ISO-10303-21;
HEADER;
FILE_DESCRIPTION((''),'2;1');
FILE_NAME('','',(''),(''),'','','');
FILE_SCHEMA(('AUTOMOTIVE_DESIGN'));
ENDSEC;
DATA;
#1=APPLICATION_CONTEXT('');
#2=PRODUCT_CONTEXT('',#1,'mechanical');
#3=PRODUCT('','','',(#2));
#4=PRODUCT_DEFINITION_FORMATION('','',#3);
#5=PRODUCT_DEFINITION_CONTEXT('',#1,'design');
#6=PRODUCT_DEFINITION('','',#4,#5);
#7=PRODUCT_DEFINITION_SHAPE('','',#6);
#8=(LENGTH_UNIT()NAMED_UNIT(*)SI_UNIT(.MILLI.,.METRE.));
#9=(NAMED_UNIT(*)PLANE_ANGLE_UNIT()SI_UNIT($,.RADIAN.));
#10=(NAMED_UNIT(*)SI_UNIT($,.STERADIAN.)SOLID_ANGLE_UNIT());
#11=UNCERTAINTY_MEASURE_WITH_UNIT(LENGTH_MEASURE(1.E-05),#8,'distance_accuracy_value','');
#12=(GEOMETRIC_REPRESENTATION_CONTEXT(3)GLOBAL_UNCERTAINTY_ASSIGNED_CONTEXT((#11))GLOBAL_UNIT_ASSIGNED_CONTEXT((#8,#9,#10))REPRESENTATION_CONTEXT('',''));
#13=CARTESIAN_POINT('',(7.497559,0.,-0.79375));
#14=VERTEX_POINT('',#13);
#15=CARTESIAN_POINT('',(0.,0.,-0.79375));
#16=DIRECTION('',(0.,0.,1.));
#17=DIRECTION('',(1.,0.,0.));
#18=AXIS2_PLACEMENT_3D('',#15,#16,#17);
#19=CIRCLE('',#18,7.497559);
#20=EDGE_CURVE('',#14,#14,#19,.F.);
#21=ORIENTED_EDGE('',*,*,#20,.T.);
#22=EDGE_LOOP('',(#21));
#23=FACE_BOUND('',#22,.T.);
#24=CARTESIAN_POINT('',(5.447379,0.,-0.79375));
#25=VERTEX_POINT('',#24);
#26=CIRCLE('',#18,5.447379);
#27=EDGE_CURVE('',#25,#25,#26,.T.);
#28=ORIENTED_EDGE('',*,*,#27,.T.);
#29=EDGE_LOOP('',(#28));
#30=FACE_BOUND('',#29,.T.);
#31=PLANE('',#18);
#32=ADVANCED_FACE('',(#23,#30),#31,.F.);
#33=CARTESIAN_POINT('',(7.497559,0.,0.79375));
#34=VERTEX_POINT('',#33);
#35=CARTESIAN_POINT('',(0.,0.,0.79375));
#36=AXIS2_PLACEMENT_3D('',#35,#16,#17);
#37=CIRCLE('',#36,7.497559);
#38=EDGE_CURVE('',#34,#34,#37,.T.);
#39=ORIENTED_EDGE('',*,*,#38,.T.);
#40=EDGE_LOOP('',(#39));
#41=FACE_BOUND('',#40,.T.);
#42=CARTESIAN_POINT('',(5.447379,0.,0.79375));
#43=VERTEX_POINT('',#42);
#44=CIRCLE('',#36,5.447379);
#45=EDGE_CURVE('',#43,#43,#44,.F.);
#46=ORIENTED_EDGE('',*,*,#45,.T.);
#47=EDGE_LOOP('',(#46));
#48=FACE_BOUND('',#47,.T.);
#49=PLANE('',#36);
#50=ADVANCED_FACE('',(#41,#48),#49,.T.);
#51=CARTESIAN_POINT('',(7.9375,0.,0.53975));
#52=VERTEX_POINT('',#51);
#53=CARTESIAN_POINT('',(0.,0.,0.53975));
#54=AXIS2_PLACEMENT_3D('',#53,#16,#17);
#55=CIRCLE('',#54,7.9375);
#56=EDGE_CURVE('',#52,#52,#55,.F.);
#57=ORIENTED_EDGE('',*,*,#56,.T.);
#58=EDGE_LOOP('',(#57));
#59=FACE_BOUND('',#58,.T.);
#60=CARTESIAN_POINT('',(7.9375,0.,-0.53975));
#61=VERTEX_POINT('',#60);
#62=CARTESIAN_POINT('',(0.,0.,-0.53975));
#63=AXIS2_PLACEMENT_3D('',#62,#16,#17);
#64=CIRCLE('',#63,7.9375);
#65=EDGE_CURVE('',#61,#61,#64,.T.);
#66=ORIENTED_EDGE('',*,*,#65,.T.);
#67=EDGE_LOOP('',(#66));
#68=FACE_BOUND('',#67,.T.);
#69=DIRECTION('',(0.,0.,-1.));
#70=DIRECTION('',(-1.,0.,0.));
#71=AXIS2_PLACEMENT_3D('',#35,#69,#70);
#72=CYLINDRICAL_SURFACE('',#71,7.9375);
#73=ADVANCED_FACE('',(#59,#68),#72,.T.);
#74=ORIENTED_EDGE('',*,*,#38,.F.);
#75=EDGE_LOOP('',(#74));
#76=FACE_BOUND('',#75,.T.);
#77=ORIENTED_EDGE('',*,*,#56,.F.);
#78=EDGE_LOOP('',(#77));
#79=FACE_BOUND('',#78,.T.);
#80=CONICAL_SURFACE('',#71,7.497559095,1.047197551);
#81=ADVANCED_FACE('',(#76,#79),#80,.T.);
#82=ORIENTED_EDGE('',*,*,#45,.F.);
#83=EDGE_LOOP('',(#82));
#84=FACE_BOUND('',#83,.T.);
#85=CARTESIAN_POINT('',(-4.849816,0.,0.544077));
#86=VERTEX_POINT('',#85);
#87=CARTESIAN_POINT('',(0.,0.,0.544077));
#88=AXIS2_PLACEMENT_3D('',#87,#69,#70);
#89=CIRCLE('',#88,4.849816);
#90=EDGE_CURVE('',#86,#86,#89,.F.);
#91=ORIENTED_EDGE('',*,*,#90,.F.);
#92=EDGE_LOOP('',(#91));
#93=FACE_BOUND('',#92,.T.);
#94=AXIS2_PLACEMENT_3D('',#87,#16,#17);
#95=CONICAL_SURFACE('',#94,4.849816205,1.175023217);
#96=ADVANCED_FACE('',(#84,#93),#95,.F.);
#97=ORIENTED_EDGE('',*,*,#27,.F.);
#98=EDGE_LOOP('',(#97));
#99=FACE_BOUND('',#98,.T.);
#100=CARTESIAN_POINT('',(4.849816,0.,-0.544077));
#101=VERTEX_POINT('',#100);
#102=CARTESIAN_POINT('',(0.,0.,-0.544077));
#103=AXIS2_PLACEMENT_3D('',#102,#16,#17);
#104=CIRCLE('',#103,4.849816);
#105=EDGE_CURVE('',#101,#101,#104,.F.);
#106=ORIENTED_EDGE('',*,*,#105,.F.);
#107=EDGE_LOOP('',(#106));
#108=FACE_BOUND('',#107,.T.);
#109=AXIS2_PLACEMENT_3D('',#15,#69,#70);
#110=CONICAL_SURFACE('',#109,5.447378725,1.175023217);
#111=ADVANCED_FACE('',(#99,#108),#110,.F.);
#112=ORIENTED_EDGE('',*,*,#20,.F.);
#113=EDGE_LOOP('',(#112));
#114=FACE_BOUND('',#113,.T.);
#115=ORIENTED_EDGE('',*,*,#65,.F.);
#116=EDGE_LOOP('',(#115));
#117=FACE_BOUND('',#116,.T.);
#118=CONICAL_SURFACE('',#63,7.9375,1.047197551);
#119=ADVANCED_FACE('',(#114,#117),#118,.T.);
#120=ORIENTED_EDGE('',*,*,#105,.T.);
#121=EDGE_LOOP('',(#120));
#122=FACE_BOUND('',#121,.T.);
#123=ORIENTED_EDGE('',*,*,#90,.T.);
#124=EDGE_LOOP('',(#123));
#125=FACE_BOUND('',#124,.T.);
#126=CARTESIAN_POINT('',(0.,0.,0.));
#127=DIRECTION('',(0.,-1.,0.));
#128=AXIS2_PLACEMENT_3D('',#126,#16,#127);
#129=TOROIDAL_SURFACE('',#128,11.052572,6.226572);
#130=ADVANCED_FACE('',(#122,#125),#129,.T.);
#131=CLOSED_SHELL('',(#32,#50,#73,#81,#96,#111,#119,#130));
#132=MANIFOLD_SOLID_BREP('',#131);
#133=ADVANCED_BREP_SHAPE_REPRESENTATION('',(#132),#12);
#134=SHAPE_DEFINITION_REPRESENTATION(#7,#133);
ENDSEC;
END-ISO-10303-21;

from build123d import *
from OCP.BRepFilletAPI import BRepFilletAPI_MakeChamfer

# Parameters (mm, degrees)
BOSS_EXTRUDE1_DEPTH      = 0.79375
BOSS_EXTRUDE1_DEPTH_BACK = 0.79375
SKETCH3_R                = 7.9375
SKETCH3_R_2              = 4.826
CHAMFER1_SIZE            = 0.254
CHAMFER1_SIZE2           = 0.439940905
CHAMFER2_SIZE            = 0.570578725


with BuildPart() as part:
    # Sketch3 → Boss-Extrude1 (new, two sides: drawn at the far end of the back side and taken through both)
    with BuildSketch(Plane.XY.offset(-BOSS_EXTRUDE1_DEPTH_BACK)):
        Circle(SKETCH3_R)
        Circle(SKETCH3_R_2, mode=Mode.SUBTRACT)
    extrude(amount=BOSS_EXTRUDE1_DEPTH + BOSS_EXTRUDE1_DEPTH_BACK)

    # Chamfer1: one chamfer whose edges measure the first distance from different faces: ONE call of the kernel's chamfer builder (chamfer() names one face for all edges)
    chamfer1_edges_1 = [part.edges().sort_by_distance(p)[0] for p in [
        (-7.9375, 0, 0.79375),
    ]]
    chamfer1_side_1 = [part.faces().sort_by_distance(p)[0] for p in [
        (-7.9375, 0, 0.396875),
    ]]
    chamfer1_edges_2 = [part.edges().sort_by_distance(p)[0] for p in [
        (-7.9375, 0, -0.79375),
    ]]
    chamfer1_side_2 = [part.faces().sort_by_distance(p)[0] for p in [
        (-7.9375, 0, -0.396875),
    ]]
    chamfer1 = BRepFilletAPI_MakeChamfer(part.part.solid().wrapped)
    for e in chamfer1_edges_1:
        chamfer1.Add(CHAMFER1_SIZE, CHAMFER1_SIZE2, e.wrapped, chamfer1_side_1[0].wrapped)  # the first distance lies on this face
    for e in chamfer1_edges_2:
        chamfer1.Add(CHAMFER1_SIZE, CHAMFER1_SIZE2, e.wrapped, chamfer1_side_2[0].wrapped)  # the first distance lies on this face
    add(Compound.cast(chamfer1.Shape()), mode=Mode.REPLACE)

    # Sketch4 → Cut-Revolve1 (revolve, cut)
    with BuildSketch(Plane(origin=(0, 0, 0), x_dir=(0, 0, -1), z_dir=(1, 0, 0)), mode=Mode.PRIVATE) as cut_revolve1_sk:
        with BuildLine():
            Line((-0.79375, 4.7752), (-0.79375, 4.8768))
            ThreePointArc((-0.79375, 4.8768), (0, 4.826), (0.79375, 4.8768))
            Line((0.79375, 4.8768), (0.79375, 4.7752))
            Line((0.79375, 4.7752), (-0.79375, 4.7752))
        make_face()
    revolve(cut_revolve1_sk.sketch.rotate(Axis((0, 0, 0.79375), (0, 0, -1)), 90), axis=Axis((0, 0, 0.79375), (0, 0, -1)), mode=Mode.SUBTRACT)

    # Chamfer2
    # the kernel refuses this chamfer: 0.570578725, 0.254 mm, written as the material it takes off along each edge
    with BuildSketch(Plane(origin=(0, 0, -0.79375), x_dir=(1, 0, 0), z_dir=(0, 1, 0))) as chamfer2_piece_1:
        with BuildLine():
            Line((4.8768 + CHAMFER2_SIZE, 0), (4.849816205, -0.249673341))
            ThreePointArc((4.849816205, -0.249673341), (4.86146095, -0.130166676), (4.8768, 0))
            Line((4.8768, 0), (4.8768 + CHAMFER2_SIZE, 0))
        make_face()
    revolve(axis=Axis((0, 0, -0.79375), (0, 0, -1)), mode=Mode.SUBTRACT)
    with BuildSketch(Plane(origin=(0, 0, 0.79375), x_dir=(1, 0, 0), z_dir=(0, 1, 0))) as chamfer2_piece_2:
        with BuildLine():
            Line((4.8768 + CHAMFER2_SIZE, 0), (4.849816205, 0.249673341))
            ThreePointArc((4.849816205, 0.249673341), (4.86146095, 0.130166676), (4.8768, 0))
            Line((4.8768, 0), (4.8768 + CHAMFER2_SIZE, 0))
        make_face()
    revolve(axis=Axis((0, 0, 0.79375), (0, 0, -1)), mode=Mode.SUBTRACT)


solid = part.part
